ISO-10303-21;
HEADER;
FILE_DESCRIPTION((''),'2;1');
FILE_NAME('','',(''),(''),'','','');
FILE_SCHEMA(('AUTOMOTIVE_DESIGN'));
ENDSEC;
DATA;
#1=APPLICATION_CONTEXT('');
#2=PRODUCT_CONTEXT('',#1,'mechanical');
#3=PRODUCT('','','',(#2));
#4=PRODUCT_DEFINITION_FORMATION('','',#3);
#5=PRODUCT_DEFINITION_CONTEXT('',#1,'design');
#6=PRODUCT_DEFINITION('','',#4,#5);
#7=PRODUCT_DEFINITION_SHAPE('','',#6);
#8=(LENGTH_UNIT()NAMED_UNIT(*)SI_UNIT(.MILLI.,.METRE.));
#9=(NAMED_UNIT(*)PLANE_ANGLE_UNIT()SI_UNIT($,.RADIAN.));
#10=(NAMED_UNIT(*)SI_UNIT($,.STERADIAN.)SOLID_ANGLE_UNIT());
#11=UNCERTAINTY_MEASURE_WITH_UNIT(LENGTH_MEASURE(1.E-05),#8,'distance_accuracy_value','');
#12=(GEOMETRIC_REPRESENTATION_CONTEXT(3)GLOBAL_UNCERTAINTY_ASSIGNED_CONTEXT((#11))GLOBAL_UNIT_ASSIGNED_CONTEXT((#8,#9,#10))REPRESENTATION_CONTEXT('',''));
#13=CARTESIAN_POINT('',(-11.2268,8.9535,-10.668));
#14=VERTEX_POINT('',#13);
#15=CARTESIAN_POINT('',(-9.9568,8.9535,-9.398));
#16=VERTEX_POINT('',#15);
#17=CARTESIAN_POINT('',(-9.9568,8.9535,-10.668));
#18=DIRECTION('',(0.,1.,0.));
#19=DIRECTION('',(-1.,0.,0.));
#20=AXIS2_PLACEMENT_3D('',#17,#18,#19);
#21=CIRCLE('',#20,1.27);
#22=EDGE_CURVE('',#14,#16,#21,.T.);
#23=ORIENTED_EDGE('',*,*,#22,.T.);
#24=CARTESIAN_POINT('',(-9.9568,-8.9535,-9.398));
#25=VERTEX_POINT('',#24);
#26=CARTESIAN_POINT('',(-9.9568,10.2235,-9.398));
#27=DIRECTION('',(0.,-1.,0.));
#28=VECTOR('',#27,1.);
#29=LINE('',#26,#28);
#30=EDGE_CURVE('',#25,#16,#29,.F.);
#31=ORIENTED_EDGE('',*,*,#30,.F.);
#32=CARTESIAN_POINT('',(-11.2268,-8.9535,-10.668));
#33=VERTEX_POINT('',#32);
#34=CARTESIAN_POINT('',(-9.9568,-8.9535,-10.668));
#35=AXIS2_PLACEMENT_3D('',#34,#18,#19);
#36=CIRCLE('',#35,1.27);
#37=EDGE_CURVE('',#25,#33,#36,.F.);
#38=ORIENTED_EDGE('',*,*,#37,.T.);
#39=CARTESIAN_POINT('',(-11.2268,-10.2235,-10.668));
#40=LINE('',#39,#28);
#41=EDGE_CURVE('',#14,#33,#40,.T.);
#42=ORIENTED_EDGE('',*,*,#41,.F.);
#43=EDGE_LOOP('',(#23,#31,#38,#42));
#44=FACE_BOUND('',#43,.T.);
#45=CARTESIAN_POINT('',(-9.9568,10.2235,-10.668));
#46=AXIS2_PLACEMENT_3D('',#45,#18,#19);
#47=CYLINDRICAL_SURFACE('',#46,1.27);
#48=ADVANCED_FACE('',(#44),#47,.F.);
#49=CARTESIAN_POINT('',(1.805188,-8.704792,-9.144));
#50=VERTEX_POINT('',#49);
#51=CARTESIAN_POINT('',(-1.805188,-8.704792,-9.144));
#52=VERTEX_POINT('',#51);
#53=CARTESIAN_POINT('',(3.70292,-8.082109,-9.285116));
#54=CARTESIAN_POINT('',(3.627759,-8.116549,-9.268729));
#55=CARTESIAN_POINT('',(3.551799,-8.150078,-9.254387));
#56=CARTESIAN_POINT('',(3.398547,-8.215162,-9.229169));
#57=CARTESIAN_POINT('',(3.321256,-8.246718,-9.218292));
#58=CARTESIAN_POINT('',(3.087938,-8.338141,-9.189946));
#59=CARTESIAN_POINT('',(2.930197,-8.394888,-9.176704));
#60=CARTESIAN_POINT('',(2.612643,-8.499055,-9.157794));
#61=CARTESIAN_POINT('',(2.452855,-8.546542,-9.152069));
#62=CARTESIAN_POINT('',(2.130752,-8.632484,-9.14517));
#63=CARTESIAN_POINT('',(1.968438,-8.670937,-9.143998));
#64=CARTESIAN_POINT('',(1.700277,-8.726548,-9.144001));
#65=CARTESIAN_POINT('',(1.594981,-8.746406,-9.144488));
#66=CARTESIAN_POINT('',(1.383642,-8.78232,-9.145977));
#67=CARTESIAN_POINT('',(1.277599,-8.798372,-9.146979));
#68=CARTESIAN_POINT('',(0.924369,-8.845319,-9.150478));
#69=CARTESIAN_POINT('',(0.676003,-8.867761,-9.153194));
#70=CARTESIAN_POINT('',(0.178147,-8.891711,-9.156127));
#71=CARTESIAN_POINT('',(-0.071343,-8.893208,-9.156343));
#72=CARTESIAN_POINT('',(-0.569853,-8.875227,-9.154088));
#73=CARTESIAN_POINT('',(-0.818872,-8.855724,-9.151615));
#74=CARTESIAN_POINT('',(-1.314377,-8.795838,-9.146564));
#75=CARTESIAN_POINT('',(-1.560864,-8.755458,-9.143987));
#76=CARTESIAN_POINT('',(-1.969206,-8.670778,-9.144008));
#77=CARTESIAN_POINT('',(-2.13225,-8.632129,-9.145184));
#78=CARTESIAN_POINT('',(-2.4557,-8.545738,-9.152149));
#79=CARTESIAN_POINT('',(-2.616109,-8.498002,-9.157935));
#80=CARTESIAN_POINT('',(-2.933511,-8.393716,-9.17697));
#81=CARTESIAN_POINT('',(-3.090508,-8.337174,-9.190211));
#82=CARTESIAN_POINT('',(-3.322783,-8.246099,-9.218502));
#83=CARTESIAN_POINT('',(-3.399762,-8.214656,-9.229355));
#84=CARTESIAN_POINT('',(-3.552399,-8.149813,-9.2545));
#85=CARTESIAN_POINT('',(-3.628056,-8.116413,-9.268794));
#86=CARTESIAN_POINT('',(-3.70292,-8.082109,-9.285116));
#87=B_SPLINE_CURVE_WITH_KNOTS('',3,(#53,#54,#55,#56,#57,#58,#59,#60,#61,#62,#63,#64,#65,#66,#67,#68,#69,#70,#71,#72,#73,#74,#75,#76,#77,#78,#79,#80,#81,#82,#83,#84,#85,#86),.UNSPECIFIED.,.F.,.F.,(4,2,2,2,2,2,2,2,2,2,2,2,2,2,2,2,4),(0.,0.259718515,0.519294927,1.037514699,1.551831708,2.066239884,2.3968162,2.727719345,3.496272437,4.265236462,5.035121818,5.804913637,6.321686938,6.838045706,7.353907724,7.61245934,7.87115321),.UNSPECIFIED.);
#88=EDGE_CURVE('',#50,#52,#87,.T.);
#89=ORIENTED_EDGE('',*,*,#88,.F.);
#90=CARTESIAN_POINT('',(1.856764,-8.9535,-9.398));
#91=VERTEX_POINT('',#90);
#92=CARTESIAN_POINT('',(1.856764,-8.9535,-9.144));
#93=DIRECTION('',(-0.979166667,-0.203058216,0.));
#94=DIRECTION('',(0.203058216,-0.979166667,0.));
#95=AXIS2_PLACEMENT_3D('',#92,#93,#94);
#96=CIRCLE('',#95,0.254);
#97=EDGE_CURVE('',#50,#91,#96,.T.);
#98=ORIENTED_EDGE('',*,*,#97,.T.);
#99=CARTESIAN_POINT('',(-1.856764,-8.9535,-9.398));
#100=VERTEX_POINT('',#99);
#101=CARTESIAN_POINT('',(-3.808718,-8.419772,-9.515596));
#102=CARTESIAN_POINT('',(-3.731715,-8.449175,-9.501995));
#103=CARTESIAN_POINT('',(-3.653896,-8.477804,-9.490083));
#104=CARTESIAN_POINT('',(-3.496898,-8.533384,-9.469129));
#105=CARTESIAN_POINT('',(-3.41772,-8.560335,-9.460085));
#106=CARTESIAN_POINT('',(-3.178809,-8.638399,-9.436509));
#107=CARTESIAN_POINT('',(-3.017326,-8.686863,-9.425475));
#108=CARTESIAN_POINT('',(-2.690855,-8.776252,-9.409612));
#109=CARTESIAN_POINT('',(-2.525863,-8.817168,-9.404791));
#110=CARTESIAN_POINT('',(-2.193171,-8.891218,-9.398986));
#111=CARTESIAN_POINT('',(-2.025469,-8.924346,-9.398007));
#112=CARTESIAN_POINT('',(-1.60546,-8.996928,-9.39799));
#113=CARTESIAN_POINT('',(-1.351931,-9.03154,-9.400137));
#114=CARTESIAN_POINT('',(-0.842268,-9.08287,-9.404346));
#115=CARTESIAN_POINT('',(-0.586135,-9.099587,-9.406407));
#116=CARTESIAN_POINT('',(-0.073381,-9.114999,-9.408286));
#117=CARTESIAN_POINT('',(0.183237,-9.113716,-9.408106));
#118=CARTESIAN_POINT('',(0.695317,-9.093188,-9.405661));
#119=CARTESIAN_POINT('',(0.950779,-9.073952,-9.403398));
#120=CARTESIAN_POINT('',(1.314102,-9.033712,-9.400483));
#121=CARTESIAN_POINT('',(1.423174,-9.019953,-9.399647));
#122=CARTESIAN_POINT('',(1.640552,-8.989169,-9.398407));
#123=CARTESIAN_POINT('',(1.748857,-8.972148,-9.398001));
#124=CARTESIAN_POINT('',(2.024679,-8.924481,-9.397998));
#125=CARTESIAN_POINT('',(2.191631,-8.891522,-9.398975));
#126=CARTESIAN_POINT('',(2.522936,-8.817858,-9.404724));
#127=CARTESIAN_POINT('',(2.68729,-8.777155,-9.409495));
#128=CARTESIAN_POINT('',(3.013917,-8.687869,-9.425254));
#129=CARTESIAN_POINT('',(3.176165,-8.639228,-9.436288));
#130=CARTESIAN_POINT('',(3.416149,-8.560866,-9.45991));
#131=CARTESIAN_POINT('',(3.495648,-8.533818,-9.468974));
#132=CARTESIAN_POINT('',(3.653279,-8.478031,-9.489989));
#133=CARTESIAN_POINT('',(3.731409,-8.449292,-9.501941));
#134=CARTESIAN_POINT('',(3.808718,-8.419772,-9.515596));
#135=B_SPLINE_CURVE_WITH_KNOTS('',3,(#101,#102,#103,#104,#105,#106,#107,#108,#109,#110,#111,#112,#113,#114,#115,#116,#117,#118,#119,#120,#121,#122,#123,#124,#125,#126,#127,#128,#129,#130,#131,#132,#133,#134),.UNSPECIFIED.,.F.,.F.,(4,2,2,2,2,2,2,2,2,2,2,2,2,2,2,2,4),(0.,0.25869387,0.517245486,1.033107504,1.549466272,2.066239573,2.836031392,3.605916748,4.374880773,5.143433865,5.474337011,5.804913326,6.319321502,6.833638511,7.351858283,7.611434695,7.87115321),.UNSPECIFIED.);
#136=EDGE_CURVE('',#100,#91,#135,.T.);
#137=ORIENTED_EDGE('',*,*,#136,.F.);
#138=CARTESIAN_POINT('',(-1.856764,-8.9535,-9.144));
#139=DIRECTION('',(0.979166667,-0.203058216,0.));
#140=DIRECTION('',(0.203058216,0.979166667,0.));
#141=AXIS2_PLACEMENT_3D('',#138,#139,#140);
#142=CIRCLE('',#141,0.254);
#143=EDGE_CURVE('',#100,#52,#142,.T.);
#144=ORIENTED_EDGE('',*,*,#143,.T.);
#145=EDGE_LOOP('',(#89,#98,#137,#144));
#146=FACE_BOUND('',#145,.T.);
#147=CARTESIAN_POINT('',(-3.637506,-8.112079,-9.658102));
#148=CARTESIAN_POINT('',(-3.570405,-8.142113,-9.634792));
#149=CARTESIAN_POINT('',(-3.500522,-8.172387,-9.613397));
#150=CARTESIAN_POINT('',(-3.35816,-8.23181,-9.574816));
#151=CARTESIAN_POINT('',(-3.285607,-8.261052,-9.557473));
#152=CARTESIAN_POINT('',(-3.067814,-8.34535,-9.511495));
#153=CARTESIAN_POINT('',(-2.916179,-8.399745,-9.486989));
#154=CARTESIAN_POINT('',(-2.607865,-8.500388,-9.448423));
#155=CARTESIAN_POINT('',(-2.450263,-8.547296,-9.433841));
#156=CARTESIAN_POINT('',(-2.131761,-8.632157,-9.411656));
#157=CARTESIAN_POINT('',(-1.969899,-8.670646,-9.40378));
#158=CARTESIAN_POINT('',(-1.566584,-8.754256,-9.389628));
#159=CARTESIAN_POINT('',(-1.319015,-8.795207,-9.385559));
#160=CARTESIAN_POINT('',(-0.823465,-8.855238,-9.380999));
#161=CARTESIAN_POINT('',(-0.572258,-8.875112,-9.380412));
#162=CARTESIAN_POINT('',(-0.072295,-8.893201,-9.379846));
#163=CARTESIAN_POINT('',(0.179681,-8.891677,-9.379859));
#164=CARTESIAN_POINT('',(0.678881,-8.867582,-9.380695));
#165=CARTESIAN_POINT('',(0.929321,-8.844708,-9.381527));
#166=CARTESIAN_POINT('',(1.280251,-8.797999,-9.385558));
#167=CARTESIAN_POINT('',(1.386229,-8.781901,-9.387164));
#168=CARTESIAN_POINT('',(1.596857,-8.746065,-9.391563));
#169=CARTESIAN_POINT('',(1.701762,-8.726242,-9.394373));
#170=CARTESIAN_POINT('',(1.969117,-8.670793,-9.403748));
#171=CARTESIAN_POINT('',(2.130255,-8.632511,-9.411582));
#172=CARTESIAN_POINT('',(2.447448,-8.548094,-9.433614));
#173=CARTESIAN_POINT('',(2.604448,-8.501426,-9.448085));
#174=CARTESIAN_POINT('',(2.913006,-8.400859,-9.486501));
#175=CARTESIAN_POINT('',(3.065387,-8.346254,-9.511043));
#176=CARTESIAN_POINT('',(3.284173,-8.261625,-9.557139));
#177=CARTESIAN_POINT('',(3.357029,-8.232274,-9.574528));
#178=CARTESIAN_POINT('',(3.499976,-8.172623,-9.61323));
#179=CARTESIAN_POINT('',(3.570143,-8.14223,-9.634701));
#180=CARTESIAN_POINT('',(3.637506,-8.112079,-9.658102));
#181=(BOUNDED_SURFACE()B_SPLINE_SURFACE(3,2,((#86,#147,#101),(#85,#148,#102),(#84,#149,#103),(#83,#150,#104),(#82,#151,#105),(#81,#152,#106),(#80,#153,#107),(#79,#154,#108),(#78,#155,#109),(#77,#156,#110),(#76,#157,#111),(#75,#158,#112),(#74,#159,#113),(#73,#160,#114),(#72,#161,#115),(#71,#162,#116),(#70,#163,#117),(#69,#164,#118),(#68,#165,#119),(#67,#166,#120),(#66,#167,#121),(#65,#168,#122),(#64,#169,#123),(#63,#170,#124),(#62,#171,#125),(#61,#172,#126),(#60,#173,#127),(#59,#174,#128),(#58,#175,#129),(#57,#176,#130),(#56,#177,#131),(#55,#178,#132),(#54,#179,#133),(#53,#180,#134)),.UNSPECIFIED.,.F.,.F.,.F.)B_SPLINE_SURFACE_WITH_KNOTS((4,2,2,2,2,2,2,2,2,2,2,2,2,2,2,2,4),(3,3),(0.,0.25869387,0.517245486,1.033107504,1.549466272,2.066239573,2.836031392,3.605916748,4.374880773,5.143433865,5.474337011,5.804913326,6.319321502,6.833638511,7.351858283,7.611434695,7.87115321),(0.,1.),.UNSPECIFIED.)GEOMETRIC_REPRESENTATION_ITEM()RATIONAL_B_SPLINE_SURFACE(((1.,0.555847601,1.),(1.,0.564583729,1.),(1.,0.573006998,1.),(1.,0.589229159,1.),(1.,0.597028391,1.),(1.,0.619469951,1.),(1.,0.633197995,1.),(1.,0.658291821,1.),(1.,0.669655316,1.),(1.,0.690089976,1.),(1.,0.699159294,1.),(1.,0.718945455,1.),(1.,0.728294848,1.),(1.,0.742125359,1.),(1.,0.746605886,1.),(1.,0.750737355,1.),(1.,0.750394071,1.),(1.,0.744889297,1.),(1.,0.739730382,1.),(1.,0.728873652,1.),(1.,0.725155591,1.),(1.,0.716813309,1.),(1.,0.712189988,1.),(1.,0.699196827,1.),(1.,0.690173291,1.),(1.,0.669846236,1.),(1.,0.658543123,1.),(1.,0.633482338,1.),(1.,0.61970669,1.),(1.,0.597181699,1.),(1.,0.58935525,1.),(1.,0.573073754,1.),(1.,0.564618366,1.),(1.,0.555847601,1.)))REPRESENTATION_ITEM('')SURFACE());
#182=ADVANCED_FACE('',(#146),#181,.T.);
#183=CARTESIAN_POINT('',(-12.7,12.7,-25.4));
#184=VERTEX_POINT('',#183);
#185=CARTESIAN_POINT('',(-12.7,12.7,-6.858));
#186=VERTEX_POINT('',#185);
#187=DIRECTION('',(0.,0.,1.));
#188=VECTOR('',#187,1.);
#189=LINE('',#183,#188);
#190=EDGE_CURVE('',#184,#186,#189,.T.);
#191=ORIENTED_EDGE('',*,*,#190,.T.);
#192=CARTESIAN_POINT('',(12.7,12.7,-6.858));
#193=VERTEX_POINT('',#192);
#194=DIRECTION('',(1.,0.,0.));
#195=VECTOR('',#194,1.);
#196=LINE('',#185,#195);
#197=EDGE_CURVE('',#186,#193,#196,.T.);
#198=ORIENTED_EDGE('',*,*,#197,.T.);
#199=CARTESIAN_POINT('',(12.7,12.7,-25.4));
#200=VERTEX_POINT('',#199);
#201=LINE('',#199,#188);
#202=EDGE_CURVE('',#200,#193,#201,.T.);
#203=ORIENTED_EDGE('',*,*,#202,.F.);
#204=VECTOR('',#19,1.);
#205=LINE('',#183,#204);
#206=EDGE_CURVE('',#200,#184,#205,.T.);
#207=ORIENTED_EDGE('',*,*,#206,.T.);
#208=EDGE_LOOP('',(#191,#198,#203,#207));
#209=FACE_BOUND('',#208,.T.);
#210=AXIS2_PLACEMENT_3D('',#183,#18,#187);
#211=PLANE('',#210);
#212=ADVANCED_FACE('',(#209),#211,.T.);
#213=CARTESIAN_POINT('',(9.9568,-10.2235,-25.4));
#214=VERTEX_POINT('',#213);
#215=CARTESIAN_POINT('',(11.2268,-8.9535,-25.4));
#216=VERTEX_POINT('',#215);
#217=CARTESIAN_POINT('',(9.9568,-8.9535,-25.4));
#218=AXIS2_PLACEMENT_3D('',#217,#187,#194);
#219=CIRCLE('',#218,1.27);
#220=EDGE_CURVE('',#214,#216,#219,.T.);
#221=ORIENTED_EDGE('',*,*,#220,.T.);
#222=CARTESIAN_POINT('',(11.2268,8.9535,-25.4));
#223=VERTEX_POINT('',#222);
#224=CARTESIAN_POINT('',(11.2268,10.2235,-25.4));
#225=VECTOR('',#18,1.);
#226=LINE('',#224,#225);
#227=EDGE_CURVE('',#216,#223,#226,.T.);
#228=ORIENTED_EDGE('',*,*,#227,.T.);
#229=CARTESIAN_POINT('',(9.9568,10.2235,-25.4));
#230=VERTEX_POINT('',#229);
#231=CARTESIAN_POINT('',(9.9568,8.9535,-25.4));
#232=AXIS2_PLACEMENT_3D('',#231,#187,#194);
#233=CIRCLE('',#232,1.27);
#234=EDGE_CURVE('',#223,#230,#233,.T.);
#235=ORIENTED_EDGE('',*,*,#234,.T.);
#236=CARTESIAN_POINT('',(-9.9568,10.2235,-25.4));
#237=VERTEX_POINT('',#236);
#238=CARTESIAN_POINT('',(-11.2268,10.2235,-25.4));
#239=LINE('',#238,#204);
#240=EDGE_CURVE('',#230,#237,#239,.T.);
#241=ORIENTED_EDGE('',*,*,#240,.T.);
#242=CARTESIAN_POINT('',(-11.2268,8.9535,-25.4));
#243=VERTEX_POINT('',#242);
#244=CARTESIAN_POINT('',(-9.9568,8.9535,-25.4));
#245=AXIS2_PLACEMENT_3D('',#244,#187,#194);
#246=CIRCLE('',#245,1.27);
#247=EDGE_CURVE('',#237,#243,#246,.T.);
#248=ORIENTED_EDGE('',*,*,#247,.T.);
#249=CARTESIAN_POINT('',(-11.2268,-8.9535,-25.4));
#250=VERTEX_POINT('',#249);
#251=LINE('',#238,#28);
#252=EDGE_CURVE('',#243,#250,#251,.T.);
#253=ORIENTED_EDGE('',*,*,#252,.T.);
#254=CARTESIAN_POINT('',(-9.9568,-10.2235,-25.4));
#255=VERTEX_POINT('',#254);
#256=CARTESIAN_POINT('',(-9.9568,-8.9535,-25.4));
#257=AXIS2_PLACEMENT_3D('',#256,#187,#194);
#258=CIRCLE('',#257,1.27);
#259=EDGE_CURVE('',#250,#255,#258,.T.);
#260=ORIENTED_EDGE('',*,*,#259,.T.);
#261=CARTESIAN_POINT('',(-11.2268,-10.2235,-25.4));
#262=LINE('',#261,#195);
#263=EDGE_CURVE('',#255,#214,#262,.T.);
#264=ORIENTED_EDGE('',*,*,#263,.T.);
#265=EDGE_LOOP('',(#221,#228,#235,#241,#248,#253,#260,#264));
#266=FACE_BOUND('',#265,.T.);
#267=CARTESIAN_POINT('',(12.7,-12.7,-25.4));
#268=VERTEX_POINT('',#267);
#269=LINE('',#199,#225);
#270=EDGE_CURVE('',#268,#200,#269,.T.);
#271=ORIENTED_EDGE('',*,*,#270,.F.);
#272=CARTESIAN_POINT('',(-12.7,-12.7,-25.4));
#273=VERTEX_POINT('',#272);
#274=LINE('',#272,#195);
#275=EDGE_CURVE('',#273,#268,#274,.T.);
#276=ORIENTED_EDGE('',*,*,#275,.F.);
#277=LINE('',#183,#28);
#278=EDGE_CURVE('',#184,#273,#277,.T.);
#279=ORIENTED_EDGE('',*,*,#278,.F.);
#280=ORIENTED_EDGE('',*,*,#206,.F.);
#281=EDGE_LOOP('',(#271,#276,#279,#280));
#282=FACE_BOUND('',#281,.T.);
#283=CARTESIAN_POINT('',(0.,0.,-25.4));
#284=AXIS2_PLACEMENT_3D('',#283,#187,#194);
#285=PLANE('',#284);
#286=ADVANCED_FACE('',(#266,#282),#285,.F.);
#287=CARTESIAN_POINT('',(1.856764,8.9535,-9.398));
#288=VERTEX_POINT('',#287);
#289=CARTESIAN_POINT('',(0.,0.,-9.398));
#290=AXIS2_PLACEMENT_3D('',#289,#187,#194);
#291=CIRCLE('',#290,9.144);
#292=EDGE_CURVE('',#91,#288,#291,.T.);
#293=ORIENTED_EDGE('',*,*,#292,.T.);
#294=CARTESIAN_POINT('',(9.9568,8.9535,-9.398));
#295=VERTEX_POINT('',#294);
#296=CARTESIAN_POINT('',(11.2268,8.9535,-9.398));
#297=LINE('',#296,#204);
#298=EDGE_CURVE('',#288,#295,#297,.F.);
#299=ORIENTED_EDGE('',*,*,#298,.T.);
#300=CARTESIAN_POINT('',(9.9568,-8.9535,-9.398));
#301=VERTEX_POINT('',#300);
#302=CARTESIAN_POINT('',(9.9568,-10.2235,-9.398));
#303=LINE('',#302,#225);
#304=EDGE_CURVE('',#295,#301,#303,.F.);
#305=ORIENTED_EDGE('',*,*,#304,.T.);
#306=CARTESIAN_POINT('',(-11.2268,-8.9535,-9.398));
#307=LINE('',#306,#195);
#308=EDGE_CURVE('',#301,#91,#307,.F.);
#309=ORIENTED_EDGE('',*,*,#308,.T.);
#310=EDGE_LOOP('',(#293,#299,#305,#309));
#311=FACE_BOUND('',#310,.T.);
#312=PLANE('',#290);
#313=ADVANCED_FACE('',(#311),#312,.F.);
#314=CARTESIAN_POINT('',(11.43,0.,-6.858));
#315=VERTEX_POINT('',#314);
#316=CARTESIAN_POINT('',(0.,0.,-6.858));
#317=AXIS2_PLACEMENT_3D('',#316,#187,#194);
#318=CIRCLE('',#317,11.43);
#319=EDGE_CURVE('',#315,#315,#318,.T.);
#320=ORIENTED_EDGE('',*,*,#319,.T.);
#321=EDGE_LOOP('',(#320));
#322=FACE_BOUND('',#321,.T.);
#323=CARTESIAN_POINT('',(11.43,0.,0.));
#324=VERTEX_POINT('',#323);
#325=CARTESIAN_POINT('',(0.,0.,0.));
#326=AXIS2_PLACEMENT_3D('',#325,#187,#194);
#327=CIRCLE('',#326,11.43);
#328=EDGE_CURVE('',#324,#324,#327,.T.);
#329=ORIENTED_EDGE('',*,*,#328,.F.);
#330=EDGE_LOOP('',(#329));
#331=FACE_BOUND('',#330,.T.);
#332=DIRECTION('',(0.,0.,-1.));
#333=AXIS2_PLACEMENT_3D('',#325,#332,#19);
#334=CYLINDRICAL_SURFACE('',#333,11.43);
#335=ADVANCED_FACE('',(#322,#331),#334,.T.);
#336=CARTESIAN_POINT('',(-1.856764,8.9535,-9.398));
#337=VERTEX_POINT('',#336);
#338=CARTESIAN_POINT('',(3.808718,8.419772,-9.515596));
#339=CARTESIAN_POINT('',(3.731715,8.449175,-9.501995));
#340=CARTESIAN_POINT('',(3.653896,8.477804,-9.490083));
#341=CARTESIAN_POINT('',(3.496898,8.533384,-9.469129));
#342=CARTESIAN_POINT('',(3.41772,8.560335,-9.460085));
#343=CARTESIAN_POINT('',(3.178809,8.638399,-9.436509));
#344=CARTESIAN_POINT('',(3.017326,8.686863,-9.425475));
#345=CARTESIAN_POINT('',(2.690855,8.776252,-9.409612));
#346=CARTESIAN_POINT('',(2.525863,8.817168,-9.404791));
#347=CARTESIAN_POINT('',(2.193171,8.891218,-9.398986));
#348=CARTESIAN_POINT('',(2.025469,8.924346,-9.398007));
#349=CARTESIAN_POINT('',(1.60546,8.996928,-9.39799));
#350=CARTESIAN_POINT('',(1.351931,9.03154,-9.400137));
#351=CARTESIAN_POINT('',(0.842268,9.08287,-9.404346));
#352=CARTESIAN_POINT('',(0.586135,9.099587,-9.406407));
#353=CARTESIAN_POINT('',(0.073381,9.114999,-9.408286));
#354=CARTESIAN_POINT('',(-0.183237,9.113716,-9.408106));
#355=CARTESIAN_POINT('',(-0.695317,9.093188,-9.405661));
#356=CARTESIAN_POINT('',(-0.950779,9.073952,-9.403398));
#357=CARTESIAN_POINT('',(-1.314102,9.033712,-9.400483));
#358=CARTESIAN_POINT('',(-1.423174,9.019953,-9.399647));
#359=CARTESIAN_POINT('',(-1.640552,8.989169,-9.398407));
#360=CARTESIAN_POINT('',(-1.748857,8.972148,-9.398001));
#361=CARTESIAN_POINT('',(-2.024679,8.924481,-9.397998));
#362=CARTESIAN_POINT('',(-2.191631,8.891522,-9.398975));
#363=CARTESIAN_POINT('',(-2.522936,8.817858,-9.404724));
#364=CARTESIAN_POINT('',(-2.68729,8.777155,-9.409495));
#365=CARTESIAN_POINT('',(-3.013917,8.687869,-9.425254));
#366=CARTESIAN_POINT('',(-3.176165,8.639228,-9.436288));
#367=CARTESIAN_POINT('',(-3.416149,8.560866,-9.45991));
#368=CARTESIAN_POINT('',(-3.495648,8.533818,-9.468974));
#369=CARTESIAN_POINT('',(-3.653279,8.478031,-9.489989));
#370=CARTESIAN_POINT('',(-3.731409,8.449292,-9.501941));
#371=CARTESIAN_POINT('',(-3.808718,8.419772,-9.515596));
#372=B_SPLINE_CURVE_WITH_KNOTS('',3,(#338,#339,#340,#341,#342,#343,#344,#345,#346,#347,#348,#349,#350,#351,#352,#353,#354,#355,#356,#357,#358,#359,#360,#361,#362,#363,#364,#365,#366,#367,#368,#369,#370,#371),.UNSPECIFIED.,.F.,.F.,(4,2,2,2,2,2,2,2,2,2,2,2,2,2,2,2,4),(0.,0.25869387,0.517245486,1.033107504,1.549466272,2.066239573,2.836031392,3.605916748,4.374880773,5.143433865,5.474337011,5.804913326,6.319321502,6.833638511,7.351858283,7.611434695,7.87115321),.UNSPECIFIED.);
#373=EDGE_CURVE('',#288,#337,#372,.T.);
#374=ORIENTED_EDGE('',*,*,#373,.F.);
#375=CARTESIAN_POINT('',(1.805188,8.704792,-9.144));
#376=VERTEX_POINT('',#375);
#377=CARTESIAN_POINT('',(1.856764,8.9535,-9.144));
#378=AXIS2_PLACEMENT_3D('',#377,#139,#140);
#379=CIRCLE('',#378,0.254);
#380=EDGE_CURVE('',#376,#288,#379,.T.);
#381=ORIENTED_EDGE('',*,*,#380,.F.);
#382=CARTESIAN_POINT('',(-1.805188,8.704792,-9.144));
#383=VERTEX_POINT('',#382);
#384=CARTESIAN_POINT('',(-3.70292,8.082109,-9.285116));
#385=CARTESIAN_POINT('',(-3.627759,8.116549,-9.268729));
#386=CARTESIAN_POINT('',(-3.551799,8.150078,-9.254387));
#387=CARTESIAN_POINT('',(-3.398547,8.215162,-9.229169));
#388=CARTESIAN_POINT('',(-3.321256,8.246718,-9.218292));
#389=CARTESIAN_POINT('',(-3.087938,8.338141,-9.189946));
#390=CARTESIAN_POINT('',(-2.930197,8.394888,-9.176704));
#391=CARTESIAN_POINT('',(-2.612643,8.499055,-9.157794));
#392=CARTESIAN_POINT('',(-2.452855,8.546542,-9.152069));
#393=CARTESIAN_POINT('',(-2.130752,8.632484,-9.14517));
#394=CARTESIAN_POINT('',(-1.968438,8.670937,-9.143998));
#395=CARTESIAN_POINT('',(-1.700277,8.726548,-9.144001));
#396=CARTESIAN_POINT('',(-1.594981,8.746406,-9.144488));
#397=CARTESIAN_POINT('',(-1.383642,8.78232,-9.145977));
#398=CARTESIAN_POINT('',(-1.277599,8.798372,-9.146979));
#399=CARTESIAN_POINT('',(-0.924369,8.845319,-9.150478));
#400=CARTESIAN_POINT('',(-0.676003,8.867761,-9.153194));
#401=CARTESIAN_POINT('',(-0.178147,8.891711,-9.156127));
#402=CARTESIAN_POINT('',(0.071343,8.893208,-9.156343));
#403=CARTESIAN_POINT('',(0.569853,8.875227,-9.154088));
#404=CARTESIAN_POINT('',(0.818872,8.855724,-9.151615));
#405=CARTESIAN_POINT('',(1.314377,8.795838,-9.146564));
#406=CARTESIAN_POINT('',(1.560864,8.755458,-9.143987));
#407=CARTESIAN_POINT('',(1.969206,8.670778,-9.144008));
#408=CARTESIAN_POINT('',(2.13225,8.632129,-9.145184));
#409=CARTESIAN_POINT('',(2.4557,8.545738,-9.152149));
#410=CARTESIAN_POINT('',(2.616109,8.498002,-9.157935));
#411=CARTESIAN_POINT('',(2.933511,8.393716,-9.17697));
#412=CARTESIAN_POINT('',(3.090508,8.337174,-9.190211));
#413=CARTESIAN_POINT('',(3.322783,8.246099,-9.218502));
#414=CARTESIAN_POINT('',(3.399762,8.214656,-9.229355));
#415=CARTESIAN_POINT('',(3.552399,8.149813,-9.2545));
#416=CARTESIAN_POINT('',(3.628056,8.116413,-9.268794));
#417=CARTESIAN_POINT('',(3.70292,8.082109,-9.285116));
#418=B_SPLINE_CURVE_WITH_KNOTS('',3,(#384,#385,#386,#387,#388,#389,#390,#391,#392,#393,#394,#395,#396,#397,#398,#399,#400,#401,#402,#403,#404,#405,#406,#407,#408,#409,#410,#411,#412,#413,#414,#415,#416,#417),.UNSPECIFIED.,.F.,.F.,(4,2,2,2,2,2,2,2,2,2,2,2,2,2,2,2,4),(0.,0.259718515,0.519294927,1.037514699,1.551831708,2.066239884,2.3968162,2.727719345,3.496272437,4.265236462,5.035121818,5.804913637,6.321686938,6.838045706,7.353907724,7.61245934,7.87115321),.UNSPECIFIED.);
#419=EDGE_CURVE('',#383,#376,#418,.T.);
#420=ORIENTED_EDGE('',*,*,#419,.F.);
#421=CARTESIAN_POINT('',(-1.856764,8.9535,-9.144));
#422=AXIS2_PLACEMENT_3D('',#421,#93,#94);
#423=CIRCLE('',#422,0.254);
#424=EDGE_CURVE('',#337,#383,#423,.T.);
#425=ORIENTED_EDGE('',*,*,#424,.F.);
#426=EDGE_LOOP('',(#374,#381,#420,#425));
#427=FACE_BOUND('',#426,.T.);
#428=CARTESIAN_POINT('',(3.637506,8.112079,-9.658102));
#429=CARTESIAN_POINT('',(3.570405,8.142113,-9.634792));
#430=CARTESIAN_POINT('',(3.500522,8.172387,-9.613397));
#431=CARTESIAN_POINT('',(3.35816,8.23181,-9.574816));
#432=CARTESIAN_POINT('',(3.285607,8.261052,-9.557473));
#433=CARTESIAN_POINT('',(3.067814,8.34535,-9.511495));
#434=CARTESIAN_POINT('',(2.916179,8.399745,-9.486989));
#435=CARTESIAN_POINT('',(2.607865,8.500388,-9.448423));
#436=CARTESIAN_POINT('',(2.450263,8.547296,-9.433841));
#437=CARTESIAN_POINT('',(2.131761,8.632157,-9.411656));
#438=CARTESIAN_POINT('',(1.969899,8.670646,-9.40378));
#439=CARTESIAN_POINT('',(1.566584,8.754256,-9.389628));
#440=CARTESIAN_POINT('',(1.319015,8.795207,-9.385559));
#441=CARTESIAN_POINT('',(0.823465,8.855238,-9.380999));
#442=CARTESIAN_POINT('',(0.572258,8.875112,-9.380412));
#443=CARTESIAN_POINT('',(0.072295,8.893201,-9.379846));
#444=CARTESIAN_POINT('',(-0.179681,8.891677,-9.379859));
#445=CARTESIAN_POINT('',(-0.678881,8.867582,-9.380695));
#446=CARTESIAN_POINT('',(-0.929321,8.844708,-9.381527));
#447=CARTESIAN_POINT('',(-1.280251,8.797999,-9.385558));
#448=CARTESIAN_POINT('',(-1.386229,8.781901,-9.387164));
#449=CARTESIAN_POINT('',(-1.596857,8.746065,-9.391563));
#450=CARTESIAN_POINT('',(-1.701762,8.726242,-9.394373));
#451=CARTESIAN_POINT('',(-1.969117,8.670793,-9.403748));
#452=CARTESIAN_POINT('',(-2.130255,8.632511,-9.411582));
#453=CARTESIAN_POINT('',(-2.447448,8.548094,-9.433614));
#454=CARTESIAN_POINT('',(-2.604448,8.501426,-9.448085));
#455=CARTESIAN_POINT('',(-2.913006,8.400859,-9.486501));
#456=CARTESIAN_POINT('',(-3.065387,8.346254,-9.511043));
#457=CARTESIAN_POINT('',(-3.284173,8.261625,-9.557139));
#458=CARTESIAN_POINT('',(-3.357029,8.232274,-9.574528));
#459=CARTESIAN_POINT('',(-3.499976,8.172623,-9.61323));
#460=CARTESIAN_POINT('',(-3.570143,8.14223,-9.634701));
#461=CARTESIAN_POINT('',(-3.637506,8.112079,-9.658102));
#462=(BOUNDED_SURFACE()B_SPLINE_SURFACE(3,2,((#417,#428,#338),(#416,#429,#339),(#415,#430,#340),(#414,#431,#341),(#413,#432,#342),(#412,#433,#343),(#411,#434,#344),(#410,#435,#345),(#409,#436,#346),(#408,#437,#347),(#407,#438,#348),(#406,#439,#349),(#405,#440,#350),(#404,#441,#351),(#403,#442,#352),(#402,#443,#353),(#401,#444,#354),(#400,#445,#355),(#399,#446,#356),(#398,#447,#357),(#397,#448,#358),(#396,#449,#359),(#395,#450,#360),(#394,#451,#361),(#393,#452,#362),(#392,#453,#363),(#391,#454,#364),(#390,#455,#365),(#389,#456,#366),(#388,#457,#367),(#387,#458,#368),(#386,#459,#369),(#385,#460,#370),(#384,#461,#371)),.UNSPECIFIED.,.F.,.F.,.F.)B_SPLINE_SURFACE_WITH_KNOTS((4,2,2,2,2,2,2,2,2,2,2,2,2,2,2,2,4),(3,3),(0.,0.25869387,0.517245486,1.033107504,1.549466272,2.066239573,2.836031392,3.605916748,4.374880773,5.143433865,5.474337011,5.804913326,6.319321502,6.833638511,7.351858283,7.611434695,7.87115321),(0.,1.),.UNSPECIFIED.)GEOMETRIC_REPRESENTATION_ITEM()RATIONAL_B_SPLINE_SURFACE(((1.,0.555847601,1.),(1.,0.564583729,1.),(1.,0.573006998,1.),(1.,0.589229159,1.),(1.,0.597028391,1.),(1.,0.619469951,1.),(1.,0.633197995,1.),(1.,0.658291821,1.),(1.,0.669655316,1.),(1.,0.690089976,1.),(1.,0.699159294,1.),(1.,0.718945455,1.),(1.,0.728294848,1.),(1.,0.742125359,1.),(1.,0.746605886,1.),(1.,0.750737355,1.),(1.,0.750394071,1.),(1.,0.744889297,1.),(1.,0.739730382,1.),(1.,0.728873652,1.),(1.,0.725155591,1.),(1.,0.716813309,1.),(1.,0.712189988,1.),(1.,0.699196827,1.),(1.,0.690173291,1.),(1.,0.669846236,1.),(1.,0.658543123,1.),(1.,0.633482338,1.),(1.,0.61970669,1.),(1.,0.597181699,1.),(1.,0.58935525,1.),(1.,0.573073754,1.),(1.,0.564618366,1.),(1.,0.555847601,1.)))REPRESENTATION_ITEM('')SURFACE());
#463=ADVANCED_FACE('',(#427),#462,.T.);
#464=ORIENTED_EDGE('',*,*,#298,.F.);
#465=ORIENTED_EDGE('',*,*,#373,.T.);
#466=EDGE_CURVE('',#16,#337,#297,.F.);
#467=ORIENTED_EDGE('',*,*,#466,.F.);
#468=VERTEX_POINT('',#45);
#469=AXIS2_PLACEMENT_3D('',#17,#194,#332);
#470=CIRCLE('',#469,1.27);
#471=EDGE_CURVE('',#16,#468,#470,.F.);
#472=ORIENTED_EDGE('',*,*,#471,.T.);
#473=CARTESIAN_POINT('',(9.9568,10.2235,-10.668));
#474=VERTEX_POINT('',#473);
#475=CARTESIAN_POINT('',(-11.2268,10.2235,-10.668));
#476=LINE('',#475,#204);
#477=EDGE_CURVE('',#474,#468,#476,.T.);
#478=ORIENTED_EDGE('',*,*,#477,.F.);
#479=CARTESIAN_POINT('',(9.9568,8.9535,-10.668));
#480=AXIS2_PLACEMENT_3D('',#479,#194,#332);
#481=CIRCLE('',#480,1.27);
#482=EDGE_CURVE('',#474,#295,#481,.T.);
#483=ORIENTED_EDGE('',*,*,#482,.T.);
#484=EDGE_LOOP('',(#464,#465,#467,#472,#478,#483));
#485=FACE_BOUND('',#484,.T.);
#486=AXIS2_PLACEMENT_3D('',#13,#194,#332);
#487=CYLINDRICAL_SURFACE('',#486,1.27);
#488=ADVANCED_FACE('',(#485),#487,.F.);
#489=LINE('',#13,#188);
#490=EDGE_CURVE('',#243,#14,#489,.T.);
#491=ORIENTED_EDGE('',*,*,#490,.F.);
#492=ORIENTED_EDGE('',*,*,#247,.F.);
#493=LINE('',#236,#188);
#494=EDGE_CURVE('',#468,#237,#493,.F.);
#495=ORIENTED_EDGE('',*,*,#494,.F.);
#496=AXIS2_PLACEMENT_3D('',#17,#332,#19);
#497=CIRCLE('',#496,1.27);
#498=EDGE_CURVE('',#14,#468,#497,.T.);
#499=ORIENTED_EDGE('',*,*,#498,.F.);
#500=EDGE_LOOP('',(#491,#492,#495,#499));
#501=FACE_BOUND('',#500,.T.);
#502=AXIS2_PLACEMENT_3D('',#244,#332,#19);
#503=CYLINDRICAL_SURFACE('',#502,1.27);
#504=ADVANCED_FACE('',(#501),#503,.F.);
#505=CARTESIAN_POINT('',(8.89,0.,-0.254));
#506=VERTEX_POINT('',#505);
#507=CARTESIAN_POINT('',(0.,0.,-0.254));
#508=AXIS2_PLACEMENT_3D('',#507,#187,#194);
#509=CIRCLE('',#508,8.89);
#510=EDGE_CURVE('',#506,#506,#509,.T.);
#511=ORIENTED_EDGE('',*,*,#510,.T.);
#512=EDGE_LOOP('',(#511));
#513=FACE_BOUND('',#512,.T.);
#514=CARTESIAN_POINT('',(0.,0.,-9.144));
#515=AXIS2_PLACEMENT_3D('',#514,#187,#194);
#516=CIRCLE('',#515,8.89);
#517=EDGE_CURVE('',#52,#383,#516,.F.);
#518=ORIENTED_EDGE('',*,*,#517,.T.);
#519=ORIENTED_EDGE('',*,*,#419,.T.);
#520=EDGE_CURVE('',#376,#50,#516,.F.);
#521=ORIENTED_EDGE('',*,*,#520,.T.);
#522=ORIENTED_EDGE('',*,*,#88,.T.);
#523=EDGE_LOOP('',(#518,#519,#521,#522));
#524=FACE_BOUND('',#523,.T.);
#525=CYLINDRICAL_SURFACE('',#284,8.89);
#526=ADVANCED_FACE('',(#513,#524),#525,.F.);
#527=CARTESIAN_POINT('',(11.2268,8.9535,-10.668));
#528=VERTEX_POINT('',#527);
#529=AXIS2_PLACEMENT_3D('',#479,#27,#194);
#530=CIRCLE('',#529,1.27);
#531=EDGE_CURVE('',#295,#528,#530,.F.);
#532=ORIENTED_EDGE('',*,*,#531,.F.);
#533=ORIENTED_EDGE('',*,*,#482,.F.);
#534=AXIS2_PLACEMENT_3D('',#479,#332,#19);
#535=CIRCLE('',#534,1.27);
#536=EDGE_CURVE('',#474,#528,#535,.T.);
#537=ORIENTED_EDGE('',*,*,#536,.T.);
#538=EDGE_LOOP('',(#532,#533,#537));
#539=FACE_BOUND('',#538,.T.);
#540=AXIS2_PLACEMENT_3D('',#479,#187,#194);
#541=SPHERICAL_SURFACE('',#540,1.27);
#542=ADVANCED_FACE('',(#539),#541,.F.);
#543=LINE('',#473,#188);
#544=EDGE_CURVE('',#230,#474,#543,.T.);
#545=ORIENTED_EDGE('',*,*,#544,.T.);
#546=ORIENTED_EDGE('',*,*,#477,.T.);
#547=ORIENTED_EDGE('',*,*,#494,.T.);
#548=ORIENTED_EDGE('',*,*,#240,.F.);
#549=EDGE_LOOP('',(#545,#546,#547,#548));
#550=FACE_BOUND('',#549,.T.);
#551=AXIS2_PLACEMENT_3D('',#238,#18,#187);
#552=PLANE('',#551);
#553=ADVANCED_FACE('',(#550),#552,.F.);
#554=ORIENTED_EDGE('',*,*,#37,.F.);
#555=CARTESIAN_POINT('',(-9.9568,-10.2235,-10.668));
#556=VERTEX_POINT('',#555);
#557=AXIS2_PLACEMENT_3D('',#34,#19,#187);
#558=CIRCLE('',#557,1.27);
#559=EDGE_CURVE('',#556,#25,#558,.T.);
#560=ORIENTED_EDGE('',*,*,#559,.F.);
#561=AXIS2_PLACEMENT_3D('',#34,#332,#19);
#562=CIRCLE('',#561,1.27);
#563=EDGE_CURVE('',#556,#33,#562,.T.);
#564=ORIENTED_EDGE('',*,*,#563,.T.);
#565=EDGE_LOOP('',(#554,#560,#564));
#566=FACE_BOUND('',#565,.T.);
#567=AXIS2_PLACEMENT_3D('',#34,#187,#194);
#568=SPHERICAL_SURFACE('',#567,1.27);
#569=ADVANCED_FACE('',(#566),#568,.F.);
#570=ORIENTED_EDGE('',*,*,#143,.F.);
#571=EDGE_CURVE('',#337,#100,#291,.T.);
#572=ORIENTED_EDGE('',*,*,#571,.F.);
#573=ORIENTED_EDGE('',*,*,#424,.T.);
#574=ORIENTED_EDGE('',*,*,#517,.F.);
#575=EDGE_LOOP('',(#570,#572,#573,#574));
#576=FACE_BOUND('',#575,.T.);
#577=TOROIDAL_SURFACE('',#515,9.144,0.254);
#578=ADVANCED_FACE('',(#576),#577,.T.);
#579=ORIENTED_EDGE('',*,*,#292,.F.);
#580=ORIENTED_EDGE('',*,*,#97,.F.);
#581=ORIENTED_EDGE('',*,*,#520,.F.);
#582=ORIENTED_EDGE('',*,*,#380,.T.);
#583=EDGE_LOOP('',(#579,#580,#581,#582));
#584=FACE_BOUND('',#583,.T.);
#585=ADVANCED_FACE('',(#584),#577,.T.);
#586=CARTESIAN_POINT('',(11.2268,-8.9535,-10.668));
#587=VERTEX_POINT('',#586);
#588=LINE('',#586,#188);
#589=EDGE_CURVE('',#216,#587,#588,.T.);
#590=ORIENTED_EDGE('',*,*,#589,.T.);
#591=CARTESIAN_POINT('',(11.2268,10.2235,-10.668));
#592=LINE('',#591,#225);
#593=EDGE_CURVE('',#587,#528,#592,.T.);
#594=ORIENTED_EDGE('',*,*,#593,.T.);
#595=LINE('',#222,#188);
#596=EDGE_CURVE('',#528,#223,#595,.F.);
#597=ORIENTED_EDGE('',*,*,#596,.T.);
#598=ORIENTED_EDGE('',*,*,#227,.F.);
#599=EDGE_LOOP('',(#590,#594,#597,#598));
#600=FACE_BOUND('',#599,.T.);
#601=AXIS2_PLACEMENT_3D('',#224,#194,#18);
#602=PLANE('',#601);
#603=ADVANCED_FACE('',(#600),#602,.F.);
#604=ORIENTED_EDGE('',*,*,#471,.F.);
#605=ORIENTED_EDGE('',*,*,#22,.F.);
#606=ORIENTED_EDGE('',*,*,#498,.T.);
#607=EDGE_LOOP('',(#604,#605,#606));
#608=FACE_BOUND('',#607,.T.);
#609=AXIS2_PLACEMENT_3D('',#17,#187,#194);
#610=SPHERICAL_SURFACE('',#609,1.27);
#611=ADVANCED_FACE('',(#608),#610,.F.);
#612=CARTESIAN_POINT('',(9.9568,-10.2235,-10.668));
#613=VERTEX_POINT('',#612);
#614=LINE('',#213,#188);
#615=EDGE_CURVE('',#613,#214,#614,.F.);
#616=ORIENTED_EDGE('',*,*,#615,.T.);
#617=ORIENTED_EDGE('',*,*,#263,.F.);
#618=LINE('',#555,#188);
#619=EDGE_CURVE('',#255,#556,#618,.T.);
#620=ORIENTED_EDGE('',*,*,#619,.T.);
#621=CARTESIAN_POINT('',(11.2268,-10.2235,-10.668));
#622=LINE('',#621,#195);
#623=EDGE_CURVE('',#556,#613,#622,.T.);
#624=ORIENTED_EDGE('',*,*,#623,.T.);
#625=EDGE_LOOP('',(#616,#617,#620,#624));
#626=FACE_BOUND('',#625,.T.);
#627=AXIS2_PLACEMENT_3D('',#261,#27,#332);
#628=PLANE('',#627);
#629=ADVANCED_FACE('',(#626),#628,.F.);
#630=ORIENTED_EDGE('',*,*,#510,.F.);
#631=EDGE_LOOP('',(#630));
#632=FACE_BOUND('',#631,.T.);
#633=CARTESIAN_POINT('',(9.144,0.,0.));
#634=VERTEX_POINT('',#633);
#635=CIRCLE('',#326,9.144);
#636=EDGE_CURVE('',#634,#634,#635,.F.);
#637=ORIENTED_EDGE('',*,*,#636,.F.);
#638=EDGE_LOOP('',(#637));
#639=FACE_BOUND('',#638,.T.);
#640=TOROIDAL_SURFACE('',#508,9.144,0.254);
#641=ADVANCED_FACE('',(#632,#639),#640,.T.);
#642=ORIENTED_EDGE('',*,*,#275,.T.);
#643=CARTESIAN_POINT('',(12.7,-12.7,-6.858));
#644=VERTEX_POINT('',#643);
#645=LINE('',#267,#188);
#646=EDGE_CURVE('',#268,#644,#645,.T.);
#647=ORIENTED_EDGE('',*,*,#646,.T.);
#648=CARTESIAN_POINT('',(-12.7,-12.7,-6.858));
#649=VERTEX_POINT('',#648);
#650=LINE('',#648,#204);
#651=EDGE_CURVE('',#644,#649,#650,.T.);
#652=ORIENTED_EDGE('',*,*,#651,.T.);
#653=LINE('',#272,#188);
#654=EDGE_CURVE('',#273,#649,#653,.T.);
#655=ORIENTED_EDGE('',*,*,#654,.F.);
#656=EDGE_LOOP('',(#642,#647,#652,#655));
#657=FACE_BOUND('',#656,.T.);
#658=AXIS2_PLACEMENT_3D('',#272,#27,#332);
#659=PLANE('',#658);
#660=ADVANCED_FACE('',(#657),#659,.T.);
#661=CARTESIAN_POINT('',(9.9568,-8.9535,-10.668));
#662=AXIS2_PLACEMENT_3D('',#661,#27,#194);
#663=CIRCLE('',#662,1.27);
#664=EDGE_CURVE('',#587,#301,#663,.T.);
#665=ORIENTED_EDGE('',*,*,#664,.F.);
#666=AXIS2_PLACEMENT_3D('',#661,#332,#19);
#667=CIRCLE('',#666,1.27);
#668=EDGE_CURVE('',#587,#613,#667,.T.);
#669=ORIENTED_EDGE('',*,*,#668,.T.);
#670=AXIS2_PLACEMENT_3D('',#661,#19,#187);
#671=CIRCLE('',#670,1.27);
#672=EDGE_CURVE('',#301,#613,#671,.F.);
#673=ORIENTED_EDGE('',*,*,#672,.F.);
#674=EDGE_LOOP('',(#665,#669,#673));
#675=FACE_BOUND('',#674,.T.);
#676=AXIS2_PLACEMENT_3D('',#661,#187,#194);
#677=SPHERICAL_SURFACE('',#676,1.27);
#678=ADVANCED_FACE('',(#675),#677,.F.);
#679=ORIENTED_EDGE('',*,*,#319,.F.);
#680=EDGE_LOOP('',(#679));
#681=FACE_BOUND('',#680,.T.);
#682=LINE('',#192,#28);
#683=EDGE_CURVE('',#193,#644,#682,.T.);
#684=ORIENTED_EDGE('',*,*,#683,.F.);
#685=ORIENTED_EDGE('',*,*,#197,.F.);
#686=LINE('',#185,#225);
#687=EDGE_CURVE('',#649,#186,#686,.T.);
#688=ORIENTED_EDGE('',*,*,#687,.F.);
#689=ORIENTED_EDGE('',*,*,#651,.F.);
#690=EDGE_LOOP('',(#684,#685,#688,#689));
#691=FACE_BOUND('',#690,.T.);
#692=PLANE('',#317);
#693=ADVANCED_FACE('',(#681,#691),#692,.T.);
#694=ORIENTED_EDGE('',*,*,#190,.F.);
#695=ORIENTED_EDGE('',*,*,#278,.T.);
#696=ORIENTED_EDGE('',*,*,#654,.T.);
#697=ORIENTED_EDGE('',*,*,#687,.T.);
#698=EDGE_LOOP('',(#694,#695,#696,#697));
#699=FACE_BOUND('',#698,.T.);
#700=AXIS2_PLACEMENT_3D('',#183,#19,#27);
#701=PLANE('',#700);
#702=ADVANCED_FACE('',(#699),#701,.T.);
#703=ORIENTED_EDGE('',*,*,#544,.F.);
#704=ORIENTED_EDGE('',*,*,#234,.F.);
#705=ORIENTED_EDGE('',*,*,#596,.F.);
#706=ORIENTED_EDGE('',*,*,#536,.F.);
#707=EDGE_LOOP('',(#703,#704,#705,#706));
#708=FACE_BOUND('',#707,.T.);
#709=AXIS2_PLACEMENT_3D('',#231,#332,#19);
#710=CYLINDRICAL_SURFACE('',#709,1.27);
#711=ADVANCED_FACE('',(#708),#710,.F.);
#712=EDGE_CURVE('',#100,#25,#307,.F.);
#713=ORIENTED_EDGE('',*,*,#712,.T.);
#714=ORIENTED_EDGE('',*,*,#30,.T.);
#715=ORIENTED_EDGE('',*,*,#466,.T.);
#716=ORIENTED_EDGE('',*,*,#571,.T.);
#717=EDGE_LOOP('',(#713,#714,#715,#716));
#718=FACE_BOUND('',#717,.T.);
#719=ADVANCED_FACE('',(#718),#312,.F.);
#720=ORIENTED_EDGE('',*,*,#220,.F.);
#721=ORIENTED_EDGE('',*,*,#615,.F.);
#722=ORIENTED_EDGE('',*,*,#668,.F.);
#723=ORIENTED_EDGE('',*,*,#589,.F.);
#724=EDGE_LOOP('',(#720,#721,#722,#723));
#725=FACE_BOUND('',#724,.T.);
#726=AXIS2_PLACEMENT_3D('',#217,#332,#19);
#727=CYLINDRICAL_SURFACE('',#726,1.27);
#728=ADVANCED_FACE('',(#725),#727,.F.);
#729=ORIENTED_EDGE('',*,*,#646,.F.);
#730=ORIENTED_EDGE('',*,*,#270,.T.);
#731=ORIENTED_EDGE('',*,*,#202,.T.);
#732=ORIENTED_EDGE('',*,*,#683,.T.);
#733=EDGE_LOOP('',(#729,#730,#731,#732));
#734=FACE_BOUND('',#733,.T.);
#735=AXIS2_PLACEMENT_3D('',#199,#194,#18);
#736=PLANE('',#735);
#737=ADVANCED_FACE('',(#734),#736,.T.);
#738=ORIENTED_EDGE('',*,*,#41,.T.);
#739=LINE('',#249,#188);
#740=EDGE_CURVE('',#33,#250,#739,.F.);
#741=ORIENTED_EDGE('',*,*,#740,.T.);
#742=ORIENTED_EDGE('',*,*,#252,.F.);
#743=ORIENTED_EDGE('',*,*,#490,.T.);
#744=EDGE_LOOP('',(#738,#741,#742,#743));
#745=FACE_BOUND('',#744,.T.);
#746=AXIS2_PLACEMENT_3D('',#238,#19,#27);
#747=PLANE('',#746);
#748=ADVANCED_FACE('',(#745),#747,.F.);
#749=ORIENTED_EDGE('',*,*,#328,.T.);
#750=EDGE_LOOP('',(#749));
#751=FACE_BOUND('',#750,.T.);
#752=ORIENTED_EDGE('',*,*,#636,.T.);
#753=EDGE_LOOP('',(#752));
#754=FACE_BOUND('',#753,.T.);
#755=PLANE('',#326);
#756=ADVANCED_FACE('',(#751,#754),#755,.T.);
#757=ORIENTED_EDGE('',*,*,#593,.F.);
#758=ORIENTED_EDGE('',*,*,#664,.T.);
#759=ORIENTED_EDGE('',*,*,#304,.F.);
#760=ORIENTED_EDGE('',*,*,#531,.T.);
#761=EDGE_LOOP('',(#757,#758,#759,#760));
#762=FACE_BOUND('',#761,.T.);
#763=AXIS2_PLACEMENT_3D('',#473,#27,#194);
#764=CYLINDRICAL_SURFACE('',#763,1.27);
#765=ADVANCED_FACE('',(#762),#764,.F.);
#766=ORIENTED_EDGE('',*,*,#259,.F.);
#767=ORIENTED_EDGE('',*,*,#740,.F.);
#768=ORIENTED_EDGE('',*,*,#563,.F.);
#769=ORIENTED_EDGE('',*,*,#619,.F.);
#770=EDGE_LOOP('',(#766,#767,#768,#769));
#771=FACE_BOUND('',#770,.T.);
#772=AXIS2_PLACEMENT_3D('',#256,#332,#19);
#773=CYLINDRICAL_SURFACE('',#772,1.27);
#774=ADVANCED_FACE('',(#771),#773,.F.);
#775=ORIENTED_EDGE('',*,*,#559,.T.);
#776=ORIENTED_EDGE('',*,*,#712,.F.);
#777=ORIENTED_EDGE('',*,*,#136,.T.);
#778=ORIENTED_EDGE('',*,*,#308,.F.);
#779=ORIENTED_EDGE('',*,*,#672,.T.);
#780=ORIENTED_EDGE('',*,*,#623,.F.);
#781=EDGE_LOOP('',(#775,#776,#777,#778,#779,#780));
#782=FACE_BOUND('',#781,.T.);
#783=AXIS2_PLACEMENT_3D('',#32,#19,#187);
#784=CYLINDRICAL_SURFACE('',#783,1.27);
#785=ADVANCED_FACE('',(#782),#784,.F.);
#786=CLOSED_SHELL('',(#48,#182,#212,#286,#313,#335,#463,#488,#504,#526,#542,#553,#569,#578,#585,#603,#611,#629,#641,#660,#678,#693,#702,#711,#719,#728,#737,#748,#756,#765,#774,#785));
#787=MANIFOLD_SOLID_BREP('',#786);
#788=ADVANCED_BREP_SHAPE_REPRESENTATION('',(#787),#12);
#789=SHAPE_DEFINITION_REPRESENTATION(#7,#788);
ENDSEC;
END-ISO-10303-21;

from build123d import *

# Parameters (mm, degrees)
SKETCH1_W               = 25.4
SKETCH1_H               = 25.4
BOSS_EXTRUDE1_DEPTH     = 25.4
SKETCH2_W               = 22.4536
SKETCH2_H               = 20.447
CUT_EXTRUDE1_DEPTH      = 25.055020349
CUT_EXTRUDE2_DEPTH      = 32.108519733
CUT_EXTRUDE2_DEPTH_BACK = 32.108519733
SKETCH3_R               = 8.89
SKETCH4_R               = 63.5
SKETCH4_R_2             = 11.43
CUT_EXTRUDE3_DEPTH      = 26.814448745
FILLET1_R               = 1.27
FILLET2_R               = 1.27
FILLET3_R               = 0.254


with BuildPart() as part:
    # Sketch1 → Boss-Extrude1 (new body)
    with BuildSketch(Plane.XY):
        Rectangle(SKETCH1_W, SKETCH1_H)
    extrude(amount=-BOSS_EXTRUDE1_DEPTH)

    # Sketch2 → Cut-Extrude1 (cut, through all)
    with BuildSketch(Plane.XY.offset(-9.398)):
        Rectangle(SKETCH2_W, SKETCH2_H)
    extrude(amount=-CUT_EXTRUDE1_DEPTH, mode=Mode.SUBTRACT)

    # Sketch3 → Cut-Extrude2 (cut, two sides: drawn at the far end of the back side and taken through both)
    with BuildSketch(Plane.XY.offset(-CUT_EXTRUDE2_DEPTH_BACK)):
        Circle(SKETCH3_R)
    extrude(amount=CUT_EXTRUDE2_DEPTH + CUT_EXTRUDE2_DEPTH_BACK, mode=Mode.SUBTRACT)

    # Sketch4 → Cut-Extrude3 (cut, through all)
    with BuildSketch(Plane.XY.offset(-6.858)):
        Circle(SKETCH4_R)
        Circle(SKETCH4_R_2, mode=Mode.SUBTRACT)
    extrude(amount=CUT_EXTRUDE3_DEPTH, mode=Mode.SUBTRACT)

    # Fillet1
    fillet1_edges = [part.edges().sort_by_distance(p)[0] for p in [
        (-11.2268, 0, -9.398),
        (0, -10.2235, -9.398),
        (11.2268, 0, -9.398),
        (0, 10.2235, -9.398),
    ]]
    fillet(fillet1_edges, radius=FILLET1_R)

    # Fillet2
    # the kernel refuses this fillet: 1.27 mm, written as the material it adds along each edge
    with BuildSketch(Plane(origin=(-9.9568, 8.9535, -10.668), x_dir=(-1, 0, 0), z_dir=(0, 1, 0))) as fillet2_piece_1_section:
        Polygon((0, 0), (FILLET2_R, 0), (FILLET2_R, FILLET2_R), (0, FILLET2_R), align=None)
    fillet2_piece_1 = extrude(amount=FILLET2_R, mode=Mode.PRIVATE)
    fillet2_piece_1 = fillet2_piece_1 - Plane(origin=(-9.9568, 8.9535, -10.668), x_dir=(0.7071067811865475, 0, -0.7071067811865475), z_dir=(0, 1, 0)) * Sphere(FILLET2_R, mode=Mode.PRIVATE)
    add(fillet2_piece_1)
    with BuildSketch(Plane(origin=(9.9568, 8.9535, -10.668), x_dir=(0, 1, 0), z_dir=(1, 0, 0))) as fillet2_piece_2_section:
        Polygon((0, 0), (FILLET2_R, 0), (FILLET2_R, FILLET2_R), (0, FILLET2_R), align=None)
    fillet2_piece_2 = extrude(amount=FILLET2_R, mode=Mode.PRIVATE)
    fillet2_piece_2 = fillet2_piece_2 - Plane(origin=(9.9568, 8.9535, -10.668), x_dir=(0, -0.7071067811865475, -0.7071067811865475), z_dir=(1, 0, 0)) * Sphere(FILLET2_R, mode=Mode.PRIVATE)
    add(fillet2_piece_2)
    with BuildSketch(Plane(origin=(-9.9568, -8.9535, -10.668), x_dir=(-1, 0, 0), z_dir=(0, -1, 0))) as fillet2_piece_3_section:
        Polygon((0, 0), (FILLET2_R, 0), (FILLET2_R, -FILLET2_R), (0, -FILLET2_R), align=None)
    fillet2_piece_3 = extrude(amount=FILLET2_R, mode=Mode.PRIVATE)
    fillet2_piece_3 = fillet2_piece_3 - Plane(origin=(-9.9568, -8.9535, -10.668), x_dir=(0.7071067811865475, 0, -0.7071067811865475), z_dir=(0, -1, 0)) * Sphere(FILLET2_R, mode=Mode.PRIVATE)
    add(fillet2_piece_3)
    with BuildSketch(Plane(origin=(9.9568, -8.9535, -10.668), x_dir=(0, -1, 0), z_dir=(1, 0, 0))) as fillet2_piece_4_section:
        Polygon((0, 0), (FILLET2_R, 0), (FILLET2_R, -FILLET2_R), (0, -FILLET2_R), align=None)
    fillet2_piece_4 = extrude(amount=FILLET2_R, mode=Mode.PRIVATE)
    fillet2_piece_4 = fillet2_piece_4 - Plane(origin=(9.9568, -8.9535, -10.668), x_dir=(0, 0.7071067811865475, -0.7071067811865475), z_dir=(1, 0, 0)) * Sphere(FILLET2_R, mode=Mode.PRIVATE)
    add(fillet2_piece_4)
    with BuildSketch(Plane(origin=(-11.2268, -10.2235, -10.668), x_dir=(1, 0, 0), z_dir=(0, 0, -1)), Plane(origin=(11.2268, -10.2235, -10.668), x_dir=(0, 1, 0), z_dir=(0, 0, -1))) as fillet2_piece_5:
        with BuildLine():
            CenterArc((FILLET2_R, -FILLET2_R), FILLET2_R, 90, 90)
            Line((0, -FILLET2_R), (0, 0))
            Line((0, 0), (FILLET2_R, 0))
        make_face()
    extrude(amount=14.732)
    with BuildSketch(Plane(origin=(-11.2268, 10.2235, -10.668), x_dir=(1, 0, 0), z_dir=(0, 0, -1)), Plane(origin=(11.2268, 10.2235, -10.668), x_dir=(0, -1, 0), z_dir=(0, 0, -1))) as fillet2_piece_6:
        with BuildLine():
            CenterArc((FILLET2_R, FILLET2_R), FILLET2_R, 180, 90)
            Line((0, FILLET2_R), (0, 0))
            Line((0, 0), (FILLET2_R, 0))
        make_face()
    extrude(amount=14.732)

    # Fillet3
    fillet3_edges = [part.edges().sort_by_distance(p)[0] for p in [
        (-8.89, 0, 0),
        (-8.89, 0, -9.398),
    ]]
    fillet(fillet3_edges, radius=FILLET3_R)


solid = part.part
